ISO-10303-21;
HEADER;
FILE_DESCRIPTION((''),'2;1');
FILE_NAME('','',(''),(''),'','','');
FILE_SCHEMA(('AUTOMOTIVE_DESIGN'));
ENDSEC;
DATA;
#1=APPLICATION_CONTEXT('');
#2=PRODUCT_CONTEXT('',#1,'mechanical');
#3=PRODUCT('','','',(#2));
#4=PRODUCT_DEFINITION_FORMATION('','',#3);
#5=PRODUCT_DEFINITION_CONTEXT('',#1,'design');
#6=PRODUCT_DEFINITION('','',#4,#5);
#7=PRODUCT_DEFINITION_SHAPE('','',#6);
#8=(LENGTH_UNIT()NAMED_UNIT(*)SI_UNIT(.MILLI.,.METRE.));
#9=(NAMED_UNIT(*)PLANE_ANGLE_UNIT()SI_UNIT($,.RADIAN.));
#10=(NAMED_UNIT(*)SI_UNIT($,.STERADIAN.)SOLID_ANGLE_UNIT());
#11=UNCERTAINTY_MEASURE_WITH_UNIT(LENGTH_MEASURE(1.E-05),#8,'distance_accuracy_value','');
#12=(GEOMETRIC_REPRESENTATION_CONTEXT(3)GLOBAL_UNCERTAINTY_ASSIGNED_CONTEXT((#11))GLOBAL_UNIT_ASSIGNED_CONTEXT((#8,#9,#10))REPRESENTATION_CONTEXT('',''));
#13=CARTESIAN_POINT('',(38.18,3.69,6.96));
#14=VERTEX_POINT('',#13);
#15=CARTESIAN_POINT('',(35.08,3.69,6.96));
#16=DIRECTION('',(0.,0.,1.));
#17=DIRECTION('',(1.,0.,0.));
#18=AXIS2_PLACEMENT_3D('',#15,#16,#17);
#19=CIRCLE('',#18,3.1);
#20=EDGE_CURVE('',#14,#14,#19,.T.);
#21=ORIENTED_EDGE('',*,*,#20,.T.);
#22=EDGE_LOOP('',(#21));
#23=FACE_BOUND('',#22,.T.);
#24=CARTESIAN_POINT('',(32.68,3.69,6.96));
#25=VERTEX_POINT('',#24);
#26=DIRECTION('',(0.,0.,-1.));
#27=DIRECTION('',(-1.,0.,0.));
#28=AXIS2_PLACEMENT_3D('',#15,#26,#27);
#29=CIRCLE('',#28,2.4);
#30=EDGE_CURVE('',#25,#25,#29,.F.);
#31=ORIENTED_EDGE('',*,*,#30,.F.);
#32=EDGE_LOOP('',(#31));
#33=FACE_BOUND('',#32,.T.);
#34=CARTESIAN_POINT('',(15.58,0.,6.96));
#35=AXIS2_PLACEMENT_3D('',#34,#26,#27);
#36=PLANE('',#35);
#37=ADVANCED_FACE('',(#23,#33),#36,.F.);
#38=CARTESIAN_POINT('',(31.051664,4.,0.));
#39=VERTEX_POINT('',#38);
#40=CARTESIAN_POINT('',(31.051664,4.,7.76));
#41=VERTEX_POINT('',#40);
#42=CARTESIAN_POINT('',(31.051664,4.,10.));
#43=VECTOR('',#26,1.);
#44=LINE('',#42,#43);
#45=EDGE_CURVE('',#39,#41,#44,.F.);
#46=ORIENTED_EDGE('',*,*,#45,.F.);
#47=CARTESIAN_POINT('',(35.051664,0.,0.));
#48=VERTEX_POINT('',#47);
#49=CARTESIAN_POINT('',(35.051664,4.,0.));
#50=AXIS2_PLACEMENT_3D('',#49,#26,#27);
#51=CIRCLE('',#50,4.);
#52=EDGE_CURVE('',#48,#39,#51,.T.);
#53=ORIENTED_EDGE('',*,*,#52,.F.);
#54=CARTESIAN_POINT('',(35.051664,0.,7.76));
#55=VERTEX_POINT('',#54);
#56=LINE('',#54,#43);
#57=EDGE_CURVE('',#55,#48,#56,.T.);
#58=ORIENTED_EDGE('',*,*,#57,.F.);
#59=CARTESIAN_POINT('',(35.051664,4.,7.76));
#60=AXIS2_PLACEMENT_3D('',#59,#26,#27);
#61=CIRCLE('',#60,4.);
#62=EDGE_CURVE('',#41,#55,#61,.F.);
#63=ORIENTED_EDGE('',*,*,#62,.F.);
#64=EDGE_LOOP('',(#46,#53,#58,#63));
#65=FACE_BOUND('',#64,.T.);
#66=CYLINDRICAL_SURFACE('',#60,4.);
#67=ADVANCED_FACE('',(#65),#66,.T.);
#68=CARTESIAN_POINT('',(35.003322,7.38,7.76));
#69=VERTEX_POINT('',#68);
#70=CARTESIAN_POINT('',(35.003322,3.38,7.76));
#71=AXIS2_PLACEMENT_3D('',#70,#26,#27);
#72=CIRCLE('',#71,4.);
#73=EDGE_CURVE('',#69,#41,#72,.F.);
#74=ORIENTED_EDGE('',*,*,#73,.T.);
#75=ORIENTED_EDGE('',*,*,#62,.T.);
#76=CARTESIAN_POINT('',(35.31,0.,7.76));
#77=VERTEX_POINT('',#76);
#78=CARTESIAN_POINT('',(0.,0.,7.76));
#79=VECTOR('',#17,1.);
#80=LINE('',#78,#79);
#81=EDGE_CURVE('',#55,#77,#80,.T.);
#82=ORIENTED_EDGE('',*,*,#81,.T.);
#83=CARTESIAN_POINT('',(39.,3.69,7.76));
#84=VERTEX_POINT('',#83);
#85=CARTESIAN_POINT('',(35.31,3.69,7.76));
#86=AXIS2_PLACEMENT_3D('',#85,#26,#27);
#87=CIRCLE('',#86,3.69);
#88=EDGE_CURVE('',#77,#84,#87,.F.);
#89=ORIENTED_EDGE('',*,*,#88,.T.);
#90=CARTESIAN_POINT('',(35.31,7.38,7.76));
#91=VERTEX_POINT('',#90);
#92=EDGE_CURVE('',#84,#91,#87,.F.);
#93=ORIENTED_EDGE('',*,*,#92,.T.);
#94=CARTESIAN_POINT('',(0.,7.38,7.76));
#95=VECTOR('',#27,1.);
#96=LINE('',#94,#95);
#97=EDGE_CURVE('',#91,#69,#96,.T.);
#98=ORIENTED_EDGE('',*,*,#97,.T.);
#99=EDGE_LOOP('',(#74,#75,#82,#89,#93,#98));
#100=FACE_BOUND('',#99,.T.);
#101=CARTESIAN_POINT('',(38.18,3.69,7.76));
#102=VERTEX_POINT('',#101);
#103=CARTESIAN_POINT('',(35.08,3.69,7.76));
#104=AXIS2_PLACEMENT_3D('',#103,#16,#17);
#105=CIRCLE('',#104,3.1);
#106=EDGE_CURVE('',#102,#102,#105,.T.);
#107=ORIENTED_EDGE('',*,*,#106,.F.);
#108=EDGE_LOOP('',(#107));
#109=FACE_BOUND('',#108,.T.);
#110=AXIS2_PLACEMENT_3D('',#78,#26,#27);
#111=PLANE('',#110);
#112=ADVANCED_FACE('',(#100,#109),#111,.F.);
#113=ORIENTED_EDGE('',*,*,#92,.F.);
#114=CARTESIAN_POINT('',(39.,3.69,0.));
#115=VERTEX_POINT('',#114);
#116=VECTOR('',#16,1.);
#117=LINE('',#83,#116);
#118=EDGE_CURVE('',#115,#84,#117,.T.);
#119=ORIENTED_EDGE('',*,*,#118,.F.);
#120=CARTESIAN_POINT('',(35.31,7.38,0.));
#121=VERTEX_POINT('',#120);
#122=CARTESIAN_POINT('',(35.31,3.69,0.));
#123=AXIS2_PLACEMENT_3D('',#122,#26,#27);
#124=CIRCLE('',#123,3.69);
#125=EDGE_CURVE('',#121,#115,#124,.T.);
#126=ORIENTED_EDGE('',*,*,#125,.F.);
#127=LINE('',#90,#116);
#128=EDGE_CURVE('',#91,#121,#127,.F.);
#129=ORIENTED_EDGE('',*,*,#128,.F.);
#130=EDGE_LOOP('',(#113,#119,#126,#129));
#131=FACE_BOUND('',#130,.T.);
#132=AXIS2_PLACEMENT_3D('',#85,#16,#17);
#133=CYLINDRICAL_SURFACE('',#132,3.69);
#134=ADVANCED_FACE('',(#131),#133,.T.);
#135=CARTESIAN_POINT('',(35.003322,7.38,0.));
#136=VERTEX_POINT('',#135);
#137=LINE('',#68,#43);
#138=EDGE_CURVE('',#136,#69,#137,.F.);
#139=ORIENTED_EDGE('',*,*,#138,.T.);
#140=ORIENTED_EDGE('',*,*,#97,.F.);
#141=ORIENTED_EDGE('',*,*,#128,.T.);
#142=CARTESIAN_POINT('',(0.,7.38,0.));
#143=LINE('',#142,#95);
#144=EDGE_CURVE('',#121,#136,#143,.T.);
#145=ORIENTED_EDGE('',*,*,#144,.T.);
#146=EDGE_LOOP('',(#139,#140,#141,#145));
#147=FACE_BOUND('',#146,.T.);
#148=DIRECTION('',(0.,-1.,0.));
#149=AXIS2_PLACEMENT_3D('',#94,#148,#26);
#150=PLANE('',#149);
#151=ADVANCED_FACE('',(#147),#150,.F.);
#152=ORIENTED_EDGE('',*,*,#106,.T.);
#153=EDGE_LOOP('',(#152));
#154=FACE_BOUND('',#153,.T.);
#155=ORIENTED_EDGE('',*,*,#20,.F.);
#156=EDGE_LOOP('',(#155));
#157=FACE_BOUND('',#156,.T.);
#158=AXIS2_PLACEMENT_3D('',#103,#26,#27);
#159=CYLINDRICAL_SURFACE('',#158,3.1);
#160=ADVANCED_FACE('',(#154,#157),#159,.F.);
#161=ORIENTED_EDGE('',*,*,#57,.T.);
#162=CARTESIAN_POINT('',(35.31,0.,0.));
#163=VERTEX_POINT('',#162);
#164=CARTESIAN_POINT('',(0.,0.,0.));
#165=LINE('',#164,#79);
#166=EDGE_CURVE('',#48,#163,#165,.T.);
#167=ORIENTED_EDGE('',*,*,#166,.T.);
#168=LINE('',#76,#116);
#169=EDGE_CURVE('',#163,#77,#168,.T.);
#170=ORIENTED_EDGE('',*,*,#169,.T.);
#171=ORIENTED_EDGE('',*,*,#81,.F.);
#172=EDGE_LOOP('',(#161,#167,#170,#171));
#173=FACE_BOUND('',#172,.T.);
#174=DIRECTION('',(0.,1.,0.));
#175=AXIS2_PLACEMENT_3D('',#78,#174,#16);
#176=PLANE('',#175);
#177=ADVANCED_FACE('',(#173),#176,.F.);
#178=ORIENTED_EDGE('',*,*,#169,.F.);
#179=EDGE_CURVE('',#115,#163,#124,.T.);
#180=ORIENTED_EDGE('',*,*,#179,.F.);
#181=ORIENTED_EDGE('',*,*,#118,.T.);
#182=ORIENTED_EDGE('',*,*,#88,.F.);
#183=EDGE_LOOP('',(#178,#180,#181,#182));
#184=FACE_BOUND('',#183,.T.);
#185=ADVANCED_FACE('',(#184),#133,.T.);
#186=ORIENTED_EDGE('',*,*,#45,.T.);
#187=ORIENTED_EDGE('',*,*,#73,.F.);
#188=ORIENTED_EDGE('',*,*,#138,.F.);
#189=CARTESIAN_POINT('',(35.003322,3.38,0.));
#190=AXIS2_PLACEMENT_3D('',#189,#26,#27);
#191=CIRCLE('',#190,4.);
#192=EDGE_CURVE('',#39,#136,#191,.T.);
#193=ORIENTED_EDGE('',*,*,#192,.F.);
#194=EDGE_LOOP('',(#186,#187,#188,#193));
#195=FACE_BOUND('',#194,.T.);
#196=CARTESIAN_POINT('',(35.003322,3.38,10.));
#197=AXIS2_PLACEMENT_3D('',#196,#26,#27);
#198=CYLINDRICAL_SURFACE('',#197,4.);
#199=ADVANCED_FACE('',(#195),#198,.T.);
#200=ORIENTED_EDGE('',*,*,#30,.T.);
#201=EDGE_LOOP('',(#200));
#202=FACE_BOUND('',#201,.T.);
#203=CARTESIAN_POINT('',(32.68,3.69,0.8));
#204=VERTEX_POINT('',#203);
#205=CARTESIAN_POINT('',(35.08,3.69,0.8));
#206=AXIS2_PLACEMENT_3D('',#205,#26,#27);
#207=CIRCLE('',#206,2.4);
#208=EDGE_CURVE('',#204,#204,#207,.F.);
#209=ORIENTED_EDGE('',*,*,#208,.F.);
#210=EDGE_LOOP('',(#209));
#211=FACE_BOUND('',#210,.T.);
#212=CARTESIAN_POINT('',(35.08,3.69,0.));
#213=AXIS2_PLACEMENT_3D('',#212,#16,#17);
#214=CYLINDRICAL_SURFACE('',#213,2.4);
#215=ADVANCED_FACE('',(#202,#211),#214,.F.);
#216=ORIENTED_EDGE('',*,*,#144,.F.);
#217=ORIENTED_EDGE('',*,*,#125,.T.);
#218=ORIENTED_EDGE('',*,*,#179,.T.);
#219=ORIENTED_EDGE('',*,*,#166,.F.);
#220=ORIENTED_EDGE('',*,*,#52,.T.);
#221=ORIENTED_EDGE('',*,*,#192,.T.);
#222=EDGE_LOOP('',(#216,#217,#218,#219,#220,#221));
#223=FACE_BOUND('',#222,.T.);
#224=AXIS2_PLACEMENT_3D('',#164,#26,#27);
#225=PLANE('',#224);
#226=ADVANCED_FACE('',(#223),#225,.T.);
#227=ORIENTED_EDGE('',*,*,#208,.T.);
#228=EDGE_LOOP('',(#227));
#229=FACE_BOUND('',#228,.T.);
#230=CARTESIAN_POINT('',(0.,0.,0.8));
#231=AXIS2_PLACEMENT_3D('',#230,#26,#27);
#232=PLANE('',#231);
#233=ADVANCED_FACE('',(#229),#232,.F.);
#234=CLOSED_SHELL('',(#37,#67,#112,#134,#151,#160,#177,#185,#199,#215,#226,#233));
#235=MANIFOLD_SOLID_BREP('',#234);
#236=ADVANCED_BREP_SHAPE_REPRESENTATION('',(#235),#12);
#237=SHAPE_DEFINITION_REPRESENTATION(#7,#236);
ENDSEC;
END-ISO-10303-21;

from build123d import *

# Parameters (mm, degrees)
SKETCH1_W                = 39
SKETCH1_H                = 7.38
BOSS_EXTRUDE1_DEPTH      = 7.76
SKETCH2_R                = 2.4
CUT_EXTRUDE1_DEPTH       = 7.76
CUT_EXTRUDE2_OUTLINE_R   = 3.1
CUT_EXTRUDE2_OUTLINE_R_2 = 2.4
CUT_EXTRUDE2_DEPTH       = 0.8
CUT_EXTRUDE3_START       = 6.96
CUT_EXTRUDE3_OUTLINE_R   = 3.1
CUT_EXTRUDE3_OUTLINE_R_2 = 2.4
CUT_EXTRUDE3_DEPTH       = 0.8
LPATTERN3_COUNT          = 3
LPATTERN3_PITCH          = 7.79
LPATTERN6_COUNT          = 3
LPATTERN6_PITCH          = 7.79
FILLET1_R                = 3.69
FILLET2_R                = 3.69
FILLET3_R                = 3.69
FILLET4_R                = 3.69
SKETCH4_W                = 32.047846992
SKETCH4_H                = 7.400170021
CUT_EXTRUDE4_DEPTH       = 10
FILLET6_R                = 4
FILLET7_R                = 4
BOSS_EXTRUDE2_START      = -0.8
BOSS_EXTRUDE2_OUTLINE_R  = 3.1
BOSS_EXTRUDE2_DEPTH      = 0.8


with BuildPart() as part:
    # Sketch1 → Boss-Extrude1 (new body)
    with BuildSketch(Plane.XY):
        with Locations((19.5, 3.69)):
            Rectangle(SKETCH1_W, SKETCH1_H)
    extrude(amount=BOSS_EXTRUDE1_DEPTH)

    # Sketch2 → Cut-Extrude1 (cut)
    with BuildSketch(Plane.XY.offset(7.76)):
        with Locations((19.5, 3.69)):
            Circle(SKETCH2_R)
    cut_extrude1 = extrude(amount=-CUT_EXTRUDE1_DEPTH, mode=Mode.SUBTRACT)

    # Cut-Extrude2: read off the stored shape, not the designer's step
    # Cut-Extrude2 outline → Cut-Extrude2 (cut)
    with BuildSketch(Plane.XY):
        with Locations((19.5, 3.69)):
            Circle(CUT_EXTRUDE2_OUTLINE_R)
        with Locations((19.5, 3.69)):
            Circle(CUT_EXTRUDE2_OUTLINE_R_2, mode=Mode.SUBTRACT)
    cut_extrude2 = extrude(amount=CUT_EXTRUDE2_DEPTH, mode=Mode.SUBTRACT)

    # Cut-Extrude3: read off the stored shape, not the designer's step
    # Cut-Extrude3 outline → Cut-Extrude3 (cut)
    with BuildSketch(Plane.XY.offset(CUT_EXTRUDE3_START)):
        with Locations((19.5, 3.69)):
            Circle(CUT_EXTRUDE3_OUTLINE_R)
        with Locations((19.5, 3.69)):
            Circle(CUT_EXTRUDE3_OUTLINE_R_2, mode=Mode.SUBTRACT)
    cut_extrude3 = extrude(amount=CUT_EXTRUDE3_DEPTH, mode=Mode.SUBTRACT)

    # LPattern3: Cut-Extrude1, Cut-Extrude2, Cut-Extrude3 ×3
    with Locations(*[(-i * LPATTERN3_PITCH, 0, 0) for i in range(1, LPATTERN3_COUNT)]):
        add(cut_extrude1, mode=Mode.SUBTRACT)
        add(cut_extrude2, mode=Mode.SUBTRACT)
        add(cut_extrude3, mode=Mode.SUBTRACT)

    # LPattern6: Cut-Extrude1, Cut-Extrude2, Cut-Extrude3 ×3
    with Locations(*[(i * LPATTERN6_PITCH, 0, 0) for i in range(1, LPATTERN6_COUNT)]):
        add(cut_extrude1, mode=Mode.SUBTRACT)
        add(cut_extrude2, mode=Mode.SUBTRACT)
        add(cut_extrude3, mode=Mode.SUBTRACT)

    # Fillet1
    fillet1_edges = [part.edges().sort_by_distance(p)[0] for p in [
        (0, 7.38, 3.88),
    ]]
    fillet(fillet1_edges, radius=FILLET1_R)

    # Fillet2
    fillet2_edges = [part.edges().sort_by_distance(p)[0] for p in [
        (0, 0, 3.88),
    ]]
    fillet(fillet2_edges, radius=FILLET2_R - 0.0001)  # a hair under: the kernel refuses the full size

    # Fillet3
    fillet3_edges = [part.edges().sort_by_distance(p)[0] for p in [
        (39, 7.38, 3.88),
    ]]
    fillet(fillet3_edges, radius=FILLET3_R)

    # Fillet4
    fillet4_edges = [part.edges().sort_by_distance(p)[0] for p in [
        (39, 0, 3.88),
    ]]
    fillet(fillet4_edges, radius=FILLET4_R - 0.0001)  # a hair under: the kernel refuses the full size

    # Sketch4 → Cut-Extrude4 (cut)
    with BuildSketch(Plane(origin=(0, 0, 0), x_dir=(-1, 0, 0), z_dir=(0, 0, -1))):
        with Locations((-15.027741002, 3.700085011)):
            Rectangle(SKETCH4_W, SKETCH4_H)
    extrude(amount=-CUT_EXTRUDE4_DEPTH, mode=Mode.SUBTRACT)

    # Fillet6
    fillet6_edges = [part.edges().sort_by_distance(p)[0] for p in [
        (31.051664498, 0, 3.88),
    ]]
    fillet(fillet6_edges, radius=FILLET6_R)

    # Fillet7
    # the kernel refuses this fillet: 4 mm, written as the material it takes off along each edge
    with BuildSketch(Plane(origin=(31.051664498, 7.38, -9.8791447), x_dir=(0, -1, 0), z_dir=(0, 0, 1))) as fillet7_piece_1:
        with BuildLine():
            CenterArc((4, 3.95165788), FILLET7_R, 180, 81.083203747)
            Line((0, 3.95165788), (-0.08, 3.95165788))
            Line((-0.08, 3.95165788), (-0.08, 0))
            Line((-0.08, 0), (0, -0.08))
            ThreePointArc((0, -0.08), (1.69, -0.08), (3.3676, -0.079033158))
            Line((3.3676, -0.079033158), (3.38, 0))
        make_face()
    extrude(amount=27.5182894, mode=Mode.SUBTRACT)

    # Boss-Extrude2: read off the stored shape, not the designer's step
    # Boss-Extrude2 outline → Boss-Extrude2 (add)
    with BuildSketch(Plane(origin=(0, 0, 0), x_dir=(-1, 0, 0), z_dir=(0, 0, -1)).offset(BOSS_EXTRUDE2_START)):
        with Locations((-35.08, 3.69)):
            Circle(BOSS_EXTRUDE2_OUTLINE_R)
    extrude(amount=BOSS_EXTRUDE2_DEPTH)


solid = part.part
